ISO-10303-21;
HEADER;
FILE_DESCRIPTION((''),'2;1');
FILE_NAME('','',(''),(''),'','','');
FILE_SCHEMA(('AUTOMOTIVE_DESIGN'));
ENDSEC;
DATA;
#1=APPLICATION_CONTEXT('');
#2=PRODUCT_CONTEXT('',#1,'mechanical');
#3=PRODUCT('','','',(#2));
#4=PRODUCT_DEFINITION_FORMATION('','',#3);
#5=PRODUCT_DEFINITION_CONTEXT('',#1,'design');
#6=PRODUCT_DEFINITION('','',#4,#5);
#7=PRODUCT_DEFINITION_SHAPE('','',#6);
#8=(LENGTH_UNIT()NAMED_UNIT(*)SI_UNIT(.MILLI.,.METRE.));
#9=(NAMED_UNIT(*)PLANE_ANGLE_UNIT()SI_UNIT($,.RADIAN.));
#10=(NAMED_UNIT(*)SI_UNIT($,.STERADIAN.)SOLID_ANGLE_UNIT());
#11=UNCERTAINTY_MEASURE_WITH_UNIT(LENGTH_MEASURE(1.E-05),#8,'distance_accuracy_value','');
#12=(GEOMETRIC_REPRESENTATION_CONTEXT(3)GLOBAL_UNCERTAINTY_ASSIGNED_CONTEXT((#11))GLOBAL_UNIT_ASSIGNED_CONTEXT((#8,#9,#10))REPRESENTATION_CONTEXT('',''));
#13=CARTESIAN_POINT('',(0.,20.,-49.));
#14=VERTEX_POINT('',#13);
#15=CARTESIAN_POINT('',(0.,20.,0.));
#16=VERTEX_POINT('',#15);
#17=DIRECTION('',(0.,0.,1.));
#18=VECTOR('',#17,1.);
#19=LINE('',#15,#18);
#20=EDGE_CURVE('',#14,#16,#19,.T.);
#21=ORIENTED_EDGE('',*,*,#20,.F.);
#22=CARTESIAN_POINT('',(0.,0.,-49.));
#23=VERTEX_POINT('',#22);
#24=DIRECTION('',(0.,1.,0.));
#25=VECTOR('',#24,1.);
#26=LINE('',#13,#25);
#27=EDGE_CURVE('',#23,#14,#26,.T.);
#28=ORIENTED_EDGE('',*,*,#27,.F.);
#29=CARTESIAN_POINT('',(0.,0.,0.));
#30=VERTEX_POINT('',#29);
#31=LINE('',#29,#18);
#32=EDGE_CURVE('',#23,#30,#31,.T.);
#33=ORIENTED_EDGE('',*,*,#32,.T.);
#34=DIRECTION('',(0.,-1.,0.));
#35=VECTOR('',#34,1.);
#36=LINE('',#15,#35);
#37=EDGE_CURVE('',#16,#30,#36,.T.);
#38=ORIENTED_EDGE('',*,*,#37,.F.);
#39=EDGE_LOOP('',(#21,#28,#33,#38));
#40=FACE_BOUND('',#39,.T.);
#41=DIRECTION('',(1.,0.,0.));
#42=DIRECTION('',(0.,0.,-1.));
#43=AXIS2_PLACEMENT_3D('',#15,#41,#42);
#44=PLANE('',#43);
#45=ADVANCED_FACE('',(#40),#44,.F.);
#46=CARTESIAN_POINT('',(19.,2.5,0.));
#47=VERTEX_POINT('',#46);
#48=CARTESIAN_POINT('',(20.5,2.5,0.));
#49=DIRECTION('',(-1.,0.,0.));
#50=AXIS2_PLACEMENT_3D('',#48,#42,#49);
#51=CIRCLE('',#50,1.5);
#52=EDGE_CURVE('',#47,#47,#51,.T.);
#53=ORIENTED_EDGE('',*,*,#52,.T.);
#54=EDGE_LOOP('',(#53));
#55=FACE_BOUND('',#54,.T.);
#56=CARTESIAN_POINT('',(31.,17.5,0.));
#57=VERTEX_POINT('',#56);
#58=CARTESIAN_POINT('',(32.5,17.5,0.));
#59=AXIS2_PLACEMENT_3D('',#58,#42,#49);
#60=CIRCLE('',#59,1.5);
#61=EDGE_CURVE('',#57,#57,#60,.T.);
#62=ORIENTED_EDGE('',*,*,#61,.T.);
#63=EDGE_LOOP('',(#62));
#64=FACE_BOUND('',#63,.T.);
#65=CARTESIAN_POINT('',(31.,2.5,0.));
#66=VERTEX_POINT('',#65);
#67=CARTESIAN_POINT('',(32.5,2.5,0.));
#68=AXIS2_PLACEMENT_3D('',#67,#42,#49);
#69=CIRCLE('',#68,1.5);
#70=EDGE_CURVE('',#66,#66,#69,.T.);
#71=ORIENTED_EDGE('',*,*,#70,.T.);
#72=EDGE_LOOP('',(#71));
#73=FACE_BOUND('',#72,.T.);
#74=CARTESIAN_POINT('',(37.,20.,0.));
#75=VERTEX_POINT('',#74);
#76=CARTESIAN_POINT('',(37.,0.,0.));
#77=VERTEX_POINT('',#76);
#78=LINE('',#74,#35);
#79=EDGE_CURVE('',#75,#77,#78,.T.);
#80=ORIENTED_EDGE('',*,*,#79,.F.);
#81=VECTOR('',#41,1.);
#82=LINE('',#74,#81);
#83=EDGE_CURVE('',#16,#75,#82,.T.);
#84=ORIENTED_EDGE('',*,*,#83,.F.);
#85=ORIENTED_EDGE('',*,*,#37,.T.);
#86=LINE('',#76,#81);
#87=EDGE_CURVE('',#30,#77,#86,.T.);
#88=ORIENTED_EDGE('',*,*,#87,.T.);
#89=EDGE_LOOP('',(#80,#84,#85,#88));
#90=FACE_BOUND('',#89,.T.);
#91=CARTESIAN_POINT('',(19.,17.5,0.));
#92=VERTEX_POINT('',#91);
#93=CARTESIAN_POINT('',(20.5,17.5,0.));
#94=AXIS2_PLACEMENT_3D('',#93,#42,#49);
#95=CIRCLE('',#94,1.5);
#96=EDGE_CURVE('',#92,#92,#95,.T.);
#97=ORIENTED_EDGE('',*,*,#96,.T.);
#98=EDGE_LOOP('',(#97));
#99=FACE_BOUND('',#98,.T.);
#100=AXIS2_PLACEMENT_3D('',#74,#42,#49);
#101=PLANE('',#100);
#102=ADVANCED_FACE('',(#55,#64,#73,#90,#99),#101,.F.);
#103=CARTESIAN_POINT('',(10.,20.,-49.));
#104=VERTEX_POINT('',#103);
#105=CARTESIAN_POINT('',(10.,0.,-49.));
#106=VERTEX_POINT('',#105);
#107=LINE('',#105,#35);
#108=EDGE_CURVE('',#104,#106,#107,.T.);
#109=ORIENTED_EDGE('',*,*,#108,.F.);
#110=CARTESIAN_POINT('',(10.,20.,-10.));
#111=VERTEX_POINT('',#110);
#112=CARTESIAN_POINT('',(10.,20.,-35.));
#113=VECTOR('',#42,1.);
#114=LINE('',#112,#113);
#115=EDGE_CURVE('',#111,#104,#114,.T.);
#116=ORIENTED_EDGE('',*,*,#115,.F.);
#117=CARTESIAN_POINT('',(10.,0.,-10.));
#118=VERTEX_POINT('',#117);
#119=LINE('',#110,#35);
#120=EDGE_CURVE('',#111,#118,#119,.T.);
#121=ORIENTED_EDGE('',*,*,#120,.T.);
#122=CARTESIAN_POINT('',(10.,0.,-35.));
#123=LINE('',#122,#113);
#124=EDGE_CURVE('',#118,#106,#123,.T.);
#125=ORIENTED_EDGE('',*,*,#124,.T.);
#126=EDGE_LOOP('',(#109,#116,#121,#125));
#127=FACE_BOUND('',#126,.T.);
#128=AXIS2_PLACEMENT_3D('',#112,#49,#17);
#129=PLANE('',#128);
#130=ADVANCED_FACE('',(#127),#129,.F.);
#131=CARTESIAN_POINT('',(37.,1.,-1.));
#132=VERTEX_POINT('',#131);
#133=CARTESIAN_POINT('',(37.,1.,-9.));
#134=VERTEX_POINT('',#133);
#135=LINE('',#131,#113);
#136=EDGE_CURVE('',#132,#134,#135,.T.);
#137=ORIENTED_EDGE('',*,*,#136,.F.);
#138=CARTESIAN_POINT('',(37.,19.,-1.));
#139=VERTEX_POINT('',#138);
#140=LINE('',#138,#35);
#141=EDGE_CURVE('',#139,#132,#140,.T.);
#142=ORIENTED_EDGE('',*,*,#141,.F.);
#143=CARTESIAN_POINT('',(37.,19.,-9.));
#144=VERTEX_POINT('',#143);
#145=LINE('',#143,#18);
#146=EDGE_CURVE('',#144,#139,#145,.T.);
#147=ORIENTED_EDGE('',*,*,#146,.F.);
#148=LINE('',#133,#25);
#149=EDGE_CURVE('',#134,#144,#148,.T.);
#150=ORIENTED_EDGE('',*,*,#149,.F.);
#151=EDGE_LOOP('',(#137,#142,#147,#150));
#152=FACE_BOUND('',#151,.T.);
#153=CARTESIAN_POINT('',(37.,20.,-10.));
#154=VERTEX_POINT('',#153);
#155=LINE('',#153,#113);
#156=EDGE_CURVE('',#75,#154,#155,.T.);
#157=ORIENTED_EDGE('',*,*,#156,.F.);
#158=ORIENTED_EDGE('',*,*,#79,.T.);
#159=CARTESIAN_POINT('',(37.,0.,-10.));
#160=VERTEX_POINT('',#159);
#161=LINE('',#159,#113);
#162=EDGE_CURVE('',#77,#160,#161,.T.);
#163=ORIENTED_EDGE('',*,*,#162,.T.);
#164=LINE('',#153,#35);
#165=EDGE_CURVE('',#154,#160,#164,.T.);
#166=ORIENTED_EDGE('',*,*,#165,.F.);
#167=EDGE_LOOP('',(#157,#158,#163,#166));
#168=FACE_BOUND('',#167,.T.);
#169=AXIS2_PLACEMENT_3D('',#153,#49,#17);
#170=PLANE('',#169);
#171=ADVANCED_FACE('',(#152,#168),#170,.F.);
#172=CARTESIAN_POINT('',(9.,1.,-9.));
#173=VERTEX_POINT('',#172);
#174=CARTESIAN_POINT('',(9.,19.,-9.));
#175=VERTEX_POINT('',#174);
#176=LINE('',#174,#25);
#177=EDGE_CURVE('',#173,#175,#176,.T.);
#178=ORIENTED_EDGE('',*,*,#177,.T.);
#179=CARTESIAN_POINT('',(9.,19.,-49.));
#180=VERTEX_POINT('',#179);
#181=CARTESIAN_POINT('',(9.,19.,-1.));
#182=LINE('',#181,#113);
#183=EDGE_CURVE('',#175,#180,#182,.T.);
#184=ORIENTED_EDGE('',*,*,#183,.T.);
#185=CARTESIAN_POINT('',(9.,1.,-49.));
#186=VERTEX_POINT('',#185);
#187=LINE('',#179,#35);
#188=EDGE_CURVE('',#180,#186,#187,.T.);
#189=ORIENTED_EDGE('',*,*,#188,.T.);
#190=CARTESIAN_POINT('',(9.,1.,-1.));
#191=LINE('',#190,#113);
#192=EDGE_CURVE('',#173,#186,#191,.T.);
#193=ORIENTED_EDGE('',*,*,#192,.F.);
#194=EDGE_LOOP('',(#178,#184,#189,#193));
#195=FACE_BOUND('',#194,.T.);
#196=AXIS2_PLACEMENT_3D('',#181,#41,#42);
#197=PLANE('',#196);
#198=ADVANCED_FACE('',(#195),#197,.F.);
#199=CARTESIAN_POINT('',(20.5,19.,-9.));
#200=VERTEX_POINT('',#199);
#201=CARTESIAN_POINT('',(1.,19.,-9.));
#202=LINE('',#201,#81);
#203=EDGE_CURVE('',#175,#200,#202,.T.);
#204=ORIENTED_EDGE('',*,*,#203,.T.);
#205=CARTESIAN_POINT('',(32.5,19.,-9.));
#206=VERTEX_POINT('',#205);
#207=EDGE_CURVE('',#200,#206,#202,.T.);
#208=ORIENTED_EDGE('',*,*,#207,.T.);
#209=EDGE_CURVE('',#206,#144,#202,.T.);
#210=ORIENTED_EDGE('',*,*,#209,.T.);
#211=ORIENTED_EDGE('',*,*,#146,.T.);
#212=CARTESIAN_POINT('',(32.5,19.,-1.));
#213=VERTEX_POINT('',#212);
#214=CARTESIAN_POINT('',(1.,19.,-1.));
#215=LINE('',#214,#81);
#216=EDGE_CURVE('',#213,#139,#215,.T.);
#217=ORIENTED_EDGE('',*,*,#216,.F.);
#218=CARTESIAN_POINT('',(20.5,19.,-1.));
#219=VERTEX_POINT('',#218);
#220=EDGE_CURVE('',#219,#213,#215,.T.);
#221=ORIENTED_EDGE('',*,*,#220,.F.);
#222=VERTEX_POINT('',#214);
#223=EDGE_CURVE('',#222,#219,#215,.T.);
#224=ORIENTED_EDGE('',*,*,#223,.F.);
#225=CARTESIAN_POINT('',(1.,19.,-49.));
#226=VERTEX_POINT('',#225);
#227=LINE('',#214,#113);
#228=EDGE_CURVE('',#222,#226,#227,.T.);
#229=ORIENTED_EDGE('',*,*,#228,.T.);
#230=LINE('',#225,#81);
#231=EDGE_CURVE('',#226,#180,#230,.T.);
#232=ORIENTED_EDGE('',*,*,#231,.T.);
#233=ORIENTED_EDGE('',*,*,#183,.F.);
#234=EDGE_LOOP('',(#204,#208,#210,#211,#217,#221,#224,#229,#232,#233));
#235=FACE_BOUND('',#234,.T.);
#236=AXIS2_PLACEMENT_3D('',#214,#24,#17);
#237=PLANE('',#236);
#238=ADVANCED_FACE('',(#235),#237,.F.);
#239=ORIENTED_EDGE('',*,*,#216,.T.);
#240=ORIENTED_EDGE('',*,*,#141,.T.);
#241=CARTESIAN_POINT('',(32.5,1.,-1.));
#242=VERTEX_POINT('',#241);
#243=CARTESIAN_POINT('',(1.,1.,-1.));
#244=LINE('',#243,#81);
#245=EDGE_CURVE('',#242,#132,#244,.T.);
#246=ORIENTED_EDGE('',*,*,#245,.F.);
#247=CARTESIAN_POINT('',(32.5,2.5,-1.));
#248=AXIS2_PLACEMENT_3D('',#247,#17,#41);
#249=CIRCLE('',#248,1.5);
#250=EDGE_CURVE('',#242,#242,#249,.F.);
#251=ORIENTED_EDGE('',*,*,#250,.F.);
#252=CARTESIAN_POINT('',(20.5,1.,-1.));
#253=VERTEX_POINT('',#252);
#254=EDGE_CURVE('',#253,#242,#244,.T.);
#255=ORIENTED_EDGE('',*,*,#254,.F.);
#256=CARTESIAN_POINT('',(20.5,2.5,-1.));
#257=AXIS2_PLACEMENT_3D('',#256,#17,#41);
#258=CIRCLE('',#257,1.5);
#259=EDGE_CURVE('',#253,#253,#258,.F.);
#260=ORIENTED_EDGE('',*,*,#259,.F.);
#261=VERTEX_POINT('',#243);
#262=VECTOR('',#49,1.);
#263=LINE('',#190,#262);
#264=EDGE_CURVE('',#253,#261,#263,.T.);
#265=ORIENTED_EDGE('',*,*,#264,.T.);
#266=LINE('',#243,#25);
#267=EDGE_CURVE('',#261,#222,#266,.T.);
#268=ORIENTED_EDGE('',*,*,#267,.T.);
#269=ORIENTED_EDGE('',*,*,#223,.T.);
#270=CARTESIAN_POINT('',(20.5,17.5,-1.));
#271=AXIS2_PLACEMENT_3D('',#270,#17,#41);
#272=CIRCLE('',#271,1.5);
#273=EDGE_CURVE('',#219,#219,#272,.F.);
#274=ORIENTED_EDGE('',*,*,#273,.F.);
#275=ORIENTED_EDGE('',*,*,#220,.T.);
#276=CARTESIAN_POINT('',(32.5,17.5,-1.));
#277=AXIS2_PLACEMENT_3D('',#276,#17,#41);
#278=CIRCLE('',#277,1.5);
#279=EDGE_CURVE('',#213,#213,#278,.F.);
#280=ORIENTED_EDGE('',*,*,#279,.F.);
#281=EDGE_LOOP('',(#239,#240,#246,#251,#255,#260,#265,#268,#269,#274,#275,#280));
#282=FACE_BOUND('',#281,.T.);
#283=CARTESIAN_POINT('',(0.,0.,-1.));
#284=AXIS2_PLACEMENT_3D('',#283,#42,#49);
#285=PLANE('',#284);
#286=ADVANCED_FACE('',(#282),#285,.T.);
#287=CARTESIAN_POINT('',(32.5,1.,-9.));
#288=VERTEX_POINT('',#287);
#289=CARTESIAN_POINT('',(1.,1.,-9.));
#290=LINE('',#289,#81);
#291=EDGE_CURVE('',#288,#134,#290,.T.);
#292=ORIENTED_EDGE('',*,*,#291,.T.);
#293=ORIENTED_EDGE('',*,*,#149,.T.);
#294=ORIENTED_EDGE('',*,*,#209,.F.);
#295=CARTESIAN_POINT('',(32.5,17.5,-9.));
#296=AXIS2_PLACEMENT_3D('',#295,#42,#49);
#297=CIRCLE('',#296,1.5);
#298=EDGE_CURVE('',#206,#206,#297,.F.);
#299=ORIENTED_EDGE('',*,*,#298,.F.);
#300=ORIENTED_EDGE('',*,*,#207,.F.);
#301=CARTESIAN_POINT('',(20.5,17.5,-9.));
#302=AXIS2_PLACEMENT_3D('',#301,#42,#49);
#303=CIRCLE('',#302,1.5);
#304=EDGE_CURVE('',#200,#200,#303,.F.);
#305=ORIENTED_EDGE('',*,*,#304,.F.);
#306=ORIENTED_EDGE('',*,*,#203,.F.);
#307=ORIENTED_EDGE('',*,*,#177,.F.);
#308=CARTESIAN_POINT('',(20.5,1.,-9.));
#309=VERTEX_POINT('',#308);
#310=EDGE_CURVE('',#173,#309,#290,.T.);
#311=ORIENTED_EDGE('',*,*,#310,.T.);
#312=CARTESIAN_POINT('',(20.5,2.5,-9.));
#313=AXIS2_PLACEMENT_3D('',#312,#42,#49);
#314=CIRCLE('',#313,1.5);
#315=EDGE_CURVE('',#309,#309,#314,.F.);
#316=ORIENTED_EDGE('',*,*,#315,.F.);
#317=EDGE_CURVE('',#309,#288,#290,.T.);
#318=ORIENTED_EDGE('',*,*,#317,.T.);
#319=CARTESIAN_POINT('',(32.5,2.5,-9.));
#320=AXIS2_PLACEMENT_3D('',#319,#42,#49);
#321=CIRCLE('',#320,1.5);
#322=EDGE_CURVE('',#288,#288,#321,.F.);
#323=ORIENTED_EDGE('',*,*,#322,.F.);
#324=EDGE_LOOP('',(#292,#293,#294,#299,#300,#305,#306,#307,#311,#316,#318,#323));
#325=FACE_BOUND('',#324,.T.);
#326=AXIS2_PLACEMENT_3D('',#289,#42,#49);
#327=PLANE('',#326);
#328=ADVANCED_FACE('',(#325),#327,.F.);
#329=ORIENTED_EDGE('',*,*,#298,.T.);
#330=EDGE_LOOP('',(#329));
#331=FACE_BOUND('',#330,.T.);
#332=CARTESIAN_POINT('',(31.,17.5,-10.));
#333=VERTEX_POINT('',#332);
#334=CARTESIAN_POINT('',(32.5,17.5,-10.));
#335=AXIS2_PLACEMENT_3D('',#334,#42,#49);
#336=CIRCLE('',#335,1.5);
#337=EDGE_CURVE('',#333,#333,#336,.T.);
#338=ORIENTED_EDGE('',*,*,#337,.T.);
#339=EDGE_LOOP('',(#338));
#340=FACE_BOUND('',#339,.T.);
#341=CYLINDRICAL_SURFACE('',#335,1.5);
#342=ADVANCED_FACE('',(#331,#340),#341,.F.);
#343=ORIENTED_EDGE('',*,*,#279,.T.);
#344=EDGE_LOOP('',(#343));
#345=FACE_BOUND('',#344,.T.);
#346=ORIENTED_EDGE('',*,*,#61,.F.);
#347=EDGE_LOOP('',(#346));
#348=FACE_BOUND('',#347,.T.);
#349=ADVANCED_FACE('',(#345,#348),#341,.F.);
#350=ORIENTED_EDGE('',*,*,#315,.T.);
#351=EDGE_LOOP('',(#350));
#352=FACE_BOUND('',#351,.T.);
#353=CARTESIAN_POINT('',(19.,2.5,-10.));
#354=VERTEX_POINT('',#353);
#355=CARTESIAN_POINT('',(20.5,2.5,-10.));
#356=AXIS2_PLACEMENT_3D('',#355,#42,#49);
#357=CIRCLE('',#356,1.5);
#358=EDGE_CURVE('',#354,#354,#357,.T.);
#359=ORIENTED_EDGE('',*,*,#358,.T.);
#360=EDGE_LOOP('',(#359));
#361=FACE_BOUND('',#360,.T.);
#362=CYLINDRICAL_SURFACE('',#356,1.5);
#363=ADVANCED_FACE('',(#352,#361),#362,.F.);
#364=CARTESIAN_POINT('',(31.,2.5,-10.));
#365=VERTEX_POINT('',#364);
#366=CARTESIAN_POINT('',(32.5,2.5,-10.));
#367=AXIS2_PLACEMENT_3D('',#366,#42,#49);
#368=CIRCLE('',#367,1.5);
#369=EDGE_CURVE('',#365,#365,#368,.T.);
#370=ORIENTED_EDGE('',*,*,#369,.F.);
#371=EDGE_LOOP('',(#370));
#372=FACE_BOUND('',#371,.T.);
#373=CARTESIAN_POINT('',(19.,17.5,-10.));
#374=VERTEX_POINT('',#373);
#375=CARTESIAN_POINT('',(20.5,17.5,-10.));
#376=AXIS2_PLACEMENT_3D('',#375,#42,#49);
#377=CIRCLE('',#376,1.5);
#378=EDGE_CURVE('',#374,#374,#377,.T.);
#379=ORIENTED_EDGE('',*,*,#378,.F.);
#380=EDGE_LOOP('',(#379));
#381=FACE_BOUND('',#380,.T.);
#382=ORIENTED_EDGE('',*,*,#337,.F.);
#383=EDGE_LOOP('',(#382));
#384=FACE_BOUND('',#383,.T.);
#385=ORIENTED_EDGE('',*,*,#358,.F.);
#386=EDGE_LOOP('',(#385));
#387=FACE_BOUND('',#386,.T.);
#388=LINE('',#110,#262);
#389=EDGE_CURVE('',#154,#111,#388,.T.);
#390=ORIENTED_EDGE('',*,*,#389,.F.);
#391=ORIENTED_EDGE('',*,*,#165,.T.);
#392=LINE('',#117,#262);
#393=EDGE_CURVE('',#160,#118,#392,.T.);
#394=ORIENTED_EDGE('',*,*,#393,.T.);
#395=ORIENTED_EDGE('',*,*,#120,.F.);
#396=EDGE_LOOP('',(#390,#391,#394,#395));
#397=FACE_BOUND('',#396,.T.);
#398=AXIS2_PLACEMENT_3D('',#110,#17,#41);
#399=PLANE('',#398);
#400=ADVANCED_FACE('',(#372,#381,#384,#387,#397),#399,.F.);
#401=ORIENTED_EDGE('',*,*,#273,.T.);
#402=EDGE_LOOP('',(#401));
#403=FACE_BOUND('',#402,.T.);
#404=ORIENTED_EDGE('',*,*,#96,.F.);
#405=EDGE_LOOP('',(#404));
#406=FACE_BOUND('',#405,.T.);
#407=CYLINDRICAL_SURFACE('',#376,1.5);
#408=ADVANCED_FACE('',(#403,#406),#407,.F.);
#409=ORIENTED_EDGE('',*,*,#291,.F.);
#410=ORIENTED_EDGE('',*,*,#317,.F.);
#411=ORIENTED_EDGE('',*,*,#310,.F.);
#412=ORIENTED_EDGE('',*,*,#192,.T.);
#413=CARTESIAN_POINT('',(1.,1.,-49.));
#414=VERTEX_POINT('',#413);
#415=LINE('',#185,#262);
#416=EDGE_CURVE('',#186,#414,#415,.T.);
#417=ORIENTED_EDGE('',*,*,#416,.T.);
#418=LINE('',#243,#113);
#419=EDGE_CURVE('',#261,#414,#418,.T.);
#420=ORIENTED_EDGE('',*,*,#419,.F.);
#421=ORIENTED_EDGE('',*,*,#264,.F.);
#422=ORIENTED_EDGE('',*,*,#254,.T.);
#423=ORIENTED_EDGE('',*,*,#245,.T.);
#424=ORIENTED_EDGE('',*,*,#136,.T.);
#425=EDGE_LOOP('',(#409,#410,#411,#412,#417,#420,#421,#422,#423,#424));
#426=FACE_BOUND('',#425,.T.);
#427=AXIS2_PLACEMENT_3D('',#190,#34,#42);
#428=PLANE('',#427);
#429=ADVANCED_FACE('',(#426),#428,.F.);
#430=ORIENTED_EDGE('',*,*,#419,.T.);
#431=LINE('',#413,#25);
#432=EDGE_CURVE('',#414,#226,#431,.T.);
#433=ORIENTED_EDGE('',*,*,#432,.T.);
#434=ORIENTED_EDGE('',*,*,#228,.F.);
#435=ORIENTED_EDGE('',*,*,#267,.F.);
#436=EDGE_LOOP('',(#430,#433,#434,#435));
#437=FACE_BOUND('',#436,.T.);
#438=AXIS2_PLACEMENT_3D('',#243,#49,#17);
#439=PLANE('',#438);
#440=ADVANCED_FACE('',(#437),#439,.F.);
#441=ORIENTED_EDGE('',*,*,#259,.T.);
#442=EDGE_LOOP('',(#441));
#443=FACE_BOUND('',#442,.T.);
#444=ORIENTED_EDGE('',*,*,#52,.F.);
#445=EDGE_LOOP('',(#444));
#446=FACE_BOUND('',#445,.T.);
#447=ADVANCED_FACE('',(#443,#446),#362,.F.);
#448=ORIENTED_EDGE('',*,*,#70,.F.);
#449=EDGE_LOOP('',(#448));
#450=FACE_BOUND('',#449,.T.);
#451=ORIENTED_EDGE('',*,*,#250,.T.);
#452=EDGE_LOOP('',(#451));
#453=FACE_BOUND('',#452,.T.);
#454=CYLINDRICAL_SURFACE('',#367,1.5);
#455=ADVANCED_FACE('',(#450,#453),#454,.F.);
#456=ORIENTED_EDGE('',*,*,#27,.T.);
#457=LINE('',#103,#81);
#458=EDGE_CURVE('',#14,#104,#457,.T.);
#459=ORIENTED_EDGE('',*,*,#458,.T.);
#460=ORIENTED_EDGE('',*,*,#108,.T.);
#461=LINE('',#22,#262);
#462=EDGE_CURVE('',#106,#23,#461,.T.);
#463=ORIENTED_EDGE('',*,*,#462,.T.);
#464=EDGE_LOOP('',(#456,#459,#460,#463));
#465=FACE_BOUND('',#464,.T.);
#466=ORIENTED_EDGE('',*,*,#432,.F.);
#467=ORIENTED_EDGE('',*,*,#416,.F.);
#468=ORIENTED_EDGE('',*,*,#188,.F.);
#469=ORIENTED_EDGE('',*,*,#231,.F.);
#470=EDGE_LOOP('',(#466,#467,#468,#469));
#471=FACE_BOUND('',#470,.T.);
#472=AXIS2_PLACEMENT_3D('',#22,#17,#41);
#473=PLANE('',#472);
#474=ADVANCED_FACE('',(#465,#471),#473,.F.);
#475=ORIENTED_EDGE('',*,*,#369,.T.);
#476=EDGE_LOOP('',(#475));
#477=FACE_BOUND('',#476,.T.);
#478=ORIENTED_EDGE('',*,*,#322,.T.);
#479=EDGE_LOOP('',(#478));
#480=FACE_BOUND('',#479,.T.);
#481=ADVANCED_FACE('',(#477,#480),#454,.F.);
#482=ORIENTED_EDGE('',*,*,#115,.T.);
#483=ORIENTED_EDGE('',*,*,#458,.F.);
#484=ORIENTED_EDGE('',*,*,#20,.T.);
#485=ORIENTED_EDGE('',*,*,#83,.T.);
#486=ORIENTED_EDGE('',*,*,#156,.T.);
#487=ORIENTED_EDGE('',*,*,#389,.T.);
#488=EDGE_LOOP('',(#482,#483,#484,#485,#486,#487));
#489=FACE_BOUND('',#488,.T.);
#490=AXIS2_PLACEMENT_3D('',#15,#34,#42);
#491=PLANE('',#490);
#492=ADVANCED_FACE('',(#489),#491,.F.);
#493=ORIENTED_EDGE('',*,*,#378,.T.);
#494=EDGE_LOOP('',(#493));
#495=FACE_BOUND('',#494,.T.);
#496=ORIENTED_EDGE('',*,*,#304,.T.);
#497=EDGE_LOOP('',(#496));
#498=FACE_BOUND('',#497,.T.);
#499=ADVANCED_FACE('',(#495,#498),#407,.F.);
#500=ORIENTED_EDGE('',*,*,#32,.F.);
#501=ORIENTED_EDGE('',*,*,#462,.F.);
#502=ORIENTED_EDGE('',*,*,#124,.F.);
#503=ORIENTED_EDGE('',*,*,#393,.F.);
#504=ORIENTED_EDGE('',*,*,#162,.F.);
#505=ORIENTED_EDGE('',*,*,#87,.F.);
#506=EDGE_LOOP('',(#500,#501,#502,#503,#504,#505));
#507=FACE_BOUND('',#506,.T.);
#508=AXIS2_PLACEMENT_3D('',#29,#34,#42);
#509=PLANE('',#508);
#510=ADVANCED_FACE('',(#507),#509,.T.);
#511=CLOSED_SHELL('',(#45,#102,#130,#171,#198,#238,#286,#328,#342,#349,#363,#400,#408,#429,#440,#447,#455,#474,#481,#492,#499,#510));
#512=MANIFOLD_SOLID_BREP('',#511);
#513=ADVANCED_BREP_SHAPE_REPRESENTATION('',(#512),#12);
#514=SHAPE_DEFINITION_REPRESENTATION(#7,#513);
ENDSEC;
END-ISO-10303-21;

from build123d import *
from build123d.topology import SkipClean

# Parameters (mm, degrees)
EXTRUDE_1_DEPTH     = 20
MM_PRESS_1_D        = 3
SKETCH_4_W          = 8
SKETCH_4_H          = 18
CUT_EXTRUDE_1_DEPTH = 34
SKETCH_5_W          = 8
SKETCH_5_H          = 18
CUT_EXTRUDE_3_DEPTH = 36
SKETCH_7_W          = 10
SKETCH_7_H          = 20
SKETCH_7_W_2        = 8
SKETCH_7_H_2        = 18
EXTRUDE_2_DEPTH     = 14


with BuildPart() as part:
    # 草图1 → 凸台-拉伸1 (new body)
    with BuildSketch(Plane(origin=(0, 0, 0), x_dir=(1, 0, 0), z_dir=(0, 1, 0))):
        Polygon((0, 0), (0, 35), (10, 35), (10, 10), (37, 10), (37, 0), align=None)
    extrude(amount=EXTRUDE_1_DEPTH)

    # 大小mm Press 暗销孔1 (through all)
    with Locations(Plane(origin=(20.5, 2.5, -10), x_dir=(-1, 0, 0), z_dir=(0, 0, -1))):
        with Locations((0, 0), (-12, 0), (-12, 15), (0, 15)):
            Hole(MM_PRESS_1_D / 2)

    # 草图4 → 切除-拉伸1 (cut)
    with BuildSketch(Plane(origin=(0, 0, -35), x_dir=(-1, 0, 0), z_dir=(0, 0, -1))):
        with Locations((-5, 10)):
            Rectangle(SKETCH_4_W, SKETCH_4_H)
    extrude(amount=-CUT_EXTRUDE_1_DEPTH, mode=Mode.SUBTRACT)

    # 草图5 → 切除-拉伸3 (cut)
    with SkipClean():  # the faces are left unmerged after this step: merging them gives an invalid solid
        with BuildSketch(Plane(origin=(37, 0, 0), x_dir=(0, 0, -1), z_dir=(1, 0, 0))):
            with Locations((5, 10)):
                Rectangle(SKETCH_5_W, SKETCH_5_H)
        extrude(amount=-CUT_EXTRUDE_3_DEPTH, mode=Mode.SUBTRACT)

    # 草图7 → 凸台-拉伸2 (add)
    with SkipClean():  # the faces are left unmerged after this step: merging them gives an invalid solid
        with BuildSketch(Plane(origin=(0, 0, -35), x_dir=(-1, 0, 0), z_dir=(0, 0, -1))):
            with Locations((-5, 10)):
                Rectangle(SKETCH_7_W, SKETCH_7_H)
            with Locations((-5, 10)):
                Rectangle(SKETCH_7_W_2, SKETCH_7_H_2, mode=Mode.SUBTRACT)
        extrude(amount=EXTRUDE_2_DEPTH)


solid = part.part
